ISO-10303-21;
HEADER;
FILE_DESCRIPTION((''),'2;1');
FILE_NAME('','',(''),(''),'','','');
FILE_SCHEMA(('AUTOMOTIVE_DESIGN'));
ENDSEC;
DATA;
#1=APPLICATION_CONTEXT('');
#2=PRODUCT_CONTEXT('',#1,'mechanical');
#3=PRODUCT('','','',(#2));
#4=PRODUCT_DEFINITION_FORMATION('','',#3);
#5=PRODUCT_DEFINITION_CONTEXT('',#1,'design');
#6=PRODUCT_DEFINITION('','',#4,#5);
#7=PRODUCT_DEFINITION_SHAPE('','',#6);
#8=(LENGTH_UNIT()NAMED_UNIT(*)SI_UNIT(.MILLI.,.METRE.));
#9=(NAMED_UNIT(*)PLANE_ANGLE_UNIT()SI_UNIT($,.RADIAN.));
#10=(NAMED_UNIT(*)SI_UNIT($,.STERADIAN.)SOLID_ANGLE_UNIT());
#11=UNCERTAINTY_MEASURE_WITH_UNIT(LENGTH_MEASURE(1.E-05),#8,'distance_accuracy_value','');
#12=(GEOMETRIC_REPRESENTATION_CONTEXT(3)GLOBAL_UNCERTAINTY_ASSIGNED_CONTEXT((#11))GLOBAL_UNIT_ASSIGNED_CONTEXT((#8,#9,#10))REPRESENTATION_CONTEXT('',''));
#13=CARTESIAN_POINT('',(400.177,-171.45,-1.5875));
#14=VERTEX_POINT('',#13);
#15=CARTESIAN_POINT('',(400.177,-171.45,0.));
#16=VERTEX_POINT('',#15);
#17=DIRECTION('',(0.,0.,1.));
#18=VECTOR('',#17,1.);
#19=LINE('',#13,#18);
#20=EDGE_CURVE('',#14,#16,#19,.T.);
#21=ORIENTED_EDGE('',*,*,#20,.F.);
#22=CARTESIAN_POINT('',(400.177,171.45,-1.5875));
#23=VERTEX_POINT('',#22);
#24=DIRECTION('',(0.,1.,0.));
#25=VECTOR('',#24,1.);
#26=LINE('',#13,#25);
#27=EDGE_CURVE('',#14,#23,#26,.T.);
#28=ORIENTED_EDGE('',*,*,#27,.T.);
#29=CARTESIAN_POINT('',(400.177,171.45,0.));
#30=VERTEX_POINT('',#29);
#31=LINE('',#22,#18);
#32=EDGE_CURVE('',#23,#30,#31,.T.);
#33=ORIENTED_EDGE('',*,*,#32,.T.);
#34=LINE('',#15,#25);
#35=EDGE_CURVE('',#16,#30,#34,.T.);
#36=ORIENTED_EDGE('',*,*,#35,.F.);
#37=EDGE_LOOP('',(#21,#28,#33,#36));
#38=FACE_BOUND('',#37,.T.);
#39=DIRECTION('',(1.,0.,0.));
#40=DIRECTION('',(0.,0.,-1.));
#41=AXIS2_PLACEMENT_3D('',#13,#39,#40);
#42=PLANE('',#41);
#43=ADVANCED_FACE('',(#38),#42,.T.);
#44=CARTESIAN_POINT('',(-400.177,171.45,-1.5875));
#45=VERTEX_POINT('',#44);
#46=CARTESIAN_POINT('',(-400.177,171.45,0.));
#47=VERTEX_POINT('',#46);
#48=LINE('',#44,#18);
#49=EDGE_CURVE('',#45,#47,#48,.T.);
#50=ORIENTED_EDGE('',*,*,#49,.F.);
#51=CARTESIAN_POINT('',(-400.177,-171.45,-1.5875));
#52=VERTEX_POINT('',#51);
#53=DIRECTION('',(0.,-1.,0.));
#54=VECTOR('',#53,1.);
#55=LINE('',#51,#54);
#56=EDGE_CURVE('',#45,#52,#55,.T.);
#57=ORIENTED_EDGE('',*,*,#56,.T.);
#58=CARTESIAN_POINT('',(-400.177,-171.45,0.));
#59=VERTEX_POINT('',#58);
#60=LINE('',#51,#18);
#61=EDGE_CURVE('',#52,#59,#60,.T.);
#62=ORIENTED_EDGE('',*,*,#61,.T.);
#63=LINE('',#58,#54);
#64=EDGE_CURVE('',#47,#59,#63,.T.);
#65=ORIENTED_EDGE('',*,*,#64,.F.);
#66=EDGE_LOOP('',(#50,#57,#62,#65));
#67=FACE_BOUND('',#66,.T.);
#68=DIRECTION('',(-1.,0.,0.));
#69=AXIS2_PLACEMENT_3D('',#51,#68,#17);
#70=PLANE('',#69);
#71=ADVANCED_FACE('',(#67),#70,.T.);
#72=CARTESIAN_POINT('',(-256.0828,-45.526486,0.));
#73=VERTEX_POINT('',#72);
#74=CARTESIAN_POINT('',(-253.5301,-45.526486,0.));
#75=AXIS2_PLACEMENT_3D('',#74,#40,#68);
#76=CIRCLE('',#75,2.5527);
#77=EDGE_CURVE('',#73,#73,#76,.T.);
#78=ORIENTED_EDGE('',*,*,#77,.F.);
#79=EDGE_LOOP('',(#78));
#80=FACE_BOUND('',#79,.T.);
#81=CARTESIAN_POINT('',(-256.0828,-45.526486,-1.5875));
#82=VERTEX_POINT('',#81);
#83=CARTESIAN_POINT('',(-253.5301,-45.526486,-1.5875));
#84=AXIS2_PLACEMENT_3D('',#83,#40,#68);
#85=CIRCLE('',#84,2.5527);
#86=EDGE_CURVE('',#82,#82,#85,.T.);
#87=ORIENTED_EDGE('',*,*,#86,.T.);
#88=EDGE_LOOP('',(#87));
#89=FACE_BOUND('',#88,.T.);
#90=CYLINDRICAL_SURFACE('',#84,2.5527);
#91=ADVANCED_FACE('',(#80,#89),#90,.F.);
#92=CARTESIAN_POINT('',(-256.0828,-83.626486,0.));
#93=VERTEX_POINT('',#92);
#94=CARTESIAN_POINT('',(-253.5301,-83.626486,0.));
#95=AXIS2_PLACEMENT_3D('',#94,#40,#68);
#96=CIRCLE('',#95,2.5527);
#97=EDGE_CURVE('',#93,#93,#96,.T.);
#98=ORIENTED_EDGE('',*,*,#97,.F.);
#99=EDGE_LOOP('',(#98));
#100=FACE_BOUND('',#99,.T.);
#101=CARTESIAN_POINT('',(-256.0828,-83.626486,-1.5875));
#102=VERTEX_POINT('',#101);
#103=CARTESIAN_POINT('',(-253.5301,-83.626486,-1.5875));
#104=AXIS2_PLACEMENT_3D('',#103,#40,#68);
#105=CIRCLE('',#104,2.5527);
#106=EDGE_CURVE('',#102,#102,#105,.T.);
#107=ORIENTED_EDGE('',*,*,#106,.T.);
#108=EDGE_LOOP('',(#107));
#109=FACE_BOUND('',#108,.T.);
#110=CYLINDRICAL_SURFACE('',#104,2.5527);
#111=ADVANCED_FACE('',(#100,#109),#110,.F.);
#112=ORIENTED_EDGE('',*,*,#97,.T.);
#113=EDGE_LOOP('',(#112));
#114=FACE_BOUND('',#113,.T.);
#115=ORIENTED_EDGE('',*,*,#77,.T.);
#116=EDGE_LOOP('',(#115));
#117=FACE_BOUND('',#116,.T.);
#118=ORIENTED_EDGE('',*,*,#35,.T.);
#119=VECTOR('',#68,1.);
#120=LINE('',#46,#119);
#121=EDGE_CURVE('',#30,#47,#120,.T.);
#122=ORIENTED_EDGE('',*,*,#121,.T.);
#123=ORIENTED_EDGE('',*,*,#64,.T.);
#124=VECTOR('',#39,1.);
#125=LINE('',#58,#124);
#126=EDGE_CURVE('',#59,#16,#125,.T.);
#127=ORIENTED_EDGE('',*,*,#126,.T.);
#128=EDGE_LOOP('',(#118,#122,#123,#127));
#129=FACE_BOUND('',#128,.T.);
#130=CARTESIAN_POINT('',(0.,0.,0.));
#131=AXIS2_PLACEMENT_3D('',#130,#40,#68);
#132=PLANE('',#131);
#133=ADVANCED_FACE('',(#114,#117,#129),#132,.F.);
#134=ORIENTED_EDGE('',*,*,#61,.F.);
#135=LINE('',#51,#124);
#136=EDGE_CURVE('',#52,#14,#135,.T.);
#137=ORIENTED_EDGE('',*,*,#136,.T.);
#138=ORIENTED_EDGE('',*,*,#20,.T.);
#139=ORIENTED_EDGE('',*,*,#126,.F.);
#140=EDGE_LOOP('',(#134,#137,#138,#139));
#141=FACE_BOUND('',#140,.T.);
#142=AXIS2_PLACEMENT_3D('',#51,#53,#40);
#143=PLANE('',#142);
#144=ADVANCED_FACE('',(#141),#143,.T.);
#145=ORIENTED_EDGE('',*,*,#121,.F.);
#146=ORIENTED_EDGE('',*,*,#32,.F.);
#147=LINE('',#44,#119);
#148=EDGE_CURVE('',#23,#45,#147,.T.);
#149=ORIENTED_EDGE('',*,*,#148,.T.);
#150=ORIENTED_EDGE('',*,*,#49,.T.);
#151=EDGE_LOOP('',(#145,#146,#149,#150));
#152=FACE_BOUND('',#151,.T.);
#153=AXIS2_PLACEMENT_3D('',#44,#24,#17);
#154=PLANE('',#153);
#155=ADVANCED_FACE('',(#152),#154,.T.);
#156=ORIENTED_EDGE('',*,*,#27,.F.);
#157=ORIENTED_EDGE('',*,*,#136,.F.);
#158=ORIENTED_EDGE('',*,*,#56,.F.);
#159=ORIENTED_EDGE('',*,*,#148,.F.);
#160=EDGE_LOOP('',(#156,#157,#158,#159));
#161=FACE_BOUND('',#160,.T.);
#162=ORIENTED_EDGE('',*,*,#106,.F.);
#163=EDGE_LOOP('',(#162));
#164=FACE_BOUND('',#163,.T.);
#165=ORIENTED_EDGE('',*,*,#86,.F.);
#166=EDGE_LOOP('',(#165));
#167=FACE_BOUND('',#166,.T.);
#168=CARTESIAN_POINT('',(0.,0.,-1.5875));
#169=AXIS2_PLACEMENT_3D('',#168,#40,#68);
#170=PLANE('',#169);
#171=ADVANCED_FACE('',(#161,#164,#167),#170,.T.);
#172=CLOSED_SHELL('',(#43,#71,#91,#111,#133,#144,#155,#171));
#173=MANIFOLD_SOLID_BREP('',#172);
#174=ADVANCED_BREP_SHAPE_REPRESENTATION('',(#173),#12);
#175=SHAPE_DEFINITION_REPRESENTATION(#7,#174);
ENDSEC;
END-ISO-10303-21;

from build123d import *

# Parameters (mm, degrees)
SKETCH1_W              = 800.354
SKETCH1_H              = 342.9
BASE_FLANGE1_DEPTH     = 1.5875
F_10_CLEARANCE_HOLE2_D = 5.1054


# Sheet-metal steps are written as plain solids
with BuildPart() as part:
    # Sketch1 → Base-Flange1 (new body)
    with BuildSketch(Plane.XY):
        Rectangle(SKETCH1_W, SKETCH1_H)
    extrude(amount=-BASE_FLANGE1_DEPTH)

    # #10 Clearance Hole2 (through all)
    with Locations(Plane(origin=(0, 0, -1.5875), x_dir=(-1, 0, 0), z_dir=(0, 0, -1))):
        with Locations((253.5301, -83.626485628), (253.5301, -45.526485628)):
            Hole(F_10_CLEARANCE_HOLE2_D / 2)


solid = part.part
